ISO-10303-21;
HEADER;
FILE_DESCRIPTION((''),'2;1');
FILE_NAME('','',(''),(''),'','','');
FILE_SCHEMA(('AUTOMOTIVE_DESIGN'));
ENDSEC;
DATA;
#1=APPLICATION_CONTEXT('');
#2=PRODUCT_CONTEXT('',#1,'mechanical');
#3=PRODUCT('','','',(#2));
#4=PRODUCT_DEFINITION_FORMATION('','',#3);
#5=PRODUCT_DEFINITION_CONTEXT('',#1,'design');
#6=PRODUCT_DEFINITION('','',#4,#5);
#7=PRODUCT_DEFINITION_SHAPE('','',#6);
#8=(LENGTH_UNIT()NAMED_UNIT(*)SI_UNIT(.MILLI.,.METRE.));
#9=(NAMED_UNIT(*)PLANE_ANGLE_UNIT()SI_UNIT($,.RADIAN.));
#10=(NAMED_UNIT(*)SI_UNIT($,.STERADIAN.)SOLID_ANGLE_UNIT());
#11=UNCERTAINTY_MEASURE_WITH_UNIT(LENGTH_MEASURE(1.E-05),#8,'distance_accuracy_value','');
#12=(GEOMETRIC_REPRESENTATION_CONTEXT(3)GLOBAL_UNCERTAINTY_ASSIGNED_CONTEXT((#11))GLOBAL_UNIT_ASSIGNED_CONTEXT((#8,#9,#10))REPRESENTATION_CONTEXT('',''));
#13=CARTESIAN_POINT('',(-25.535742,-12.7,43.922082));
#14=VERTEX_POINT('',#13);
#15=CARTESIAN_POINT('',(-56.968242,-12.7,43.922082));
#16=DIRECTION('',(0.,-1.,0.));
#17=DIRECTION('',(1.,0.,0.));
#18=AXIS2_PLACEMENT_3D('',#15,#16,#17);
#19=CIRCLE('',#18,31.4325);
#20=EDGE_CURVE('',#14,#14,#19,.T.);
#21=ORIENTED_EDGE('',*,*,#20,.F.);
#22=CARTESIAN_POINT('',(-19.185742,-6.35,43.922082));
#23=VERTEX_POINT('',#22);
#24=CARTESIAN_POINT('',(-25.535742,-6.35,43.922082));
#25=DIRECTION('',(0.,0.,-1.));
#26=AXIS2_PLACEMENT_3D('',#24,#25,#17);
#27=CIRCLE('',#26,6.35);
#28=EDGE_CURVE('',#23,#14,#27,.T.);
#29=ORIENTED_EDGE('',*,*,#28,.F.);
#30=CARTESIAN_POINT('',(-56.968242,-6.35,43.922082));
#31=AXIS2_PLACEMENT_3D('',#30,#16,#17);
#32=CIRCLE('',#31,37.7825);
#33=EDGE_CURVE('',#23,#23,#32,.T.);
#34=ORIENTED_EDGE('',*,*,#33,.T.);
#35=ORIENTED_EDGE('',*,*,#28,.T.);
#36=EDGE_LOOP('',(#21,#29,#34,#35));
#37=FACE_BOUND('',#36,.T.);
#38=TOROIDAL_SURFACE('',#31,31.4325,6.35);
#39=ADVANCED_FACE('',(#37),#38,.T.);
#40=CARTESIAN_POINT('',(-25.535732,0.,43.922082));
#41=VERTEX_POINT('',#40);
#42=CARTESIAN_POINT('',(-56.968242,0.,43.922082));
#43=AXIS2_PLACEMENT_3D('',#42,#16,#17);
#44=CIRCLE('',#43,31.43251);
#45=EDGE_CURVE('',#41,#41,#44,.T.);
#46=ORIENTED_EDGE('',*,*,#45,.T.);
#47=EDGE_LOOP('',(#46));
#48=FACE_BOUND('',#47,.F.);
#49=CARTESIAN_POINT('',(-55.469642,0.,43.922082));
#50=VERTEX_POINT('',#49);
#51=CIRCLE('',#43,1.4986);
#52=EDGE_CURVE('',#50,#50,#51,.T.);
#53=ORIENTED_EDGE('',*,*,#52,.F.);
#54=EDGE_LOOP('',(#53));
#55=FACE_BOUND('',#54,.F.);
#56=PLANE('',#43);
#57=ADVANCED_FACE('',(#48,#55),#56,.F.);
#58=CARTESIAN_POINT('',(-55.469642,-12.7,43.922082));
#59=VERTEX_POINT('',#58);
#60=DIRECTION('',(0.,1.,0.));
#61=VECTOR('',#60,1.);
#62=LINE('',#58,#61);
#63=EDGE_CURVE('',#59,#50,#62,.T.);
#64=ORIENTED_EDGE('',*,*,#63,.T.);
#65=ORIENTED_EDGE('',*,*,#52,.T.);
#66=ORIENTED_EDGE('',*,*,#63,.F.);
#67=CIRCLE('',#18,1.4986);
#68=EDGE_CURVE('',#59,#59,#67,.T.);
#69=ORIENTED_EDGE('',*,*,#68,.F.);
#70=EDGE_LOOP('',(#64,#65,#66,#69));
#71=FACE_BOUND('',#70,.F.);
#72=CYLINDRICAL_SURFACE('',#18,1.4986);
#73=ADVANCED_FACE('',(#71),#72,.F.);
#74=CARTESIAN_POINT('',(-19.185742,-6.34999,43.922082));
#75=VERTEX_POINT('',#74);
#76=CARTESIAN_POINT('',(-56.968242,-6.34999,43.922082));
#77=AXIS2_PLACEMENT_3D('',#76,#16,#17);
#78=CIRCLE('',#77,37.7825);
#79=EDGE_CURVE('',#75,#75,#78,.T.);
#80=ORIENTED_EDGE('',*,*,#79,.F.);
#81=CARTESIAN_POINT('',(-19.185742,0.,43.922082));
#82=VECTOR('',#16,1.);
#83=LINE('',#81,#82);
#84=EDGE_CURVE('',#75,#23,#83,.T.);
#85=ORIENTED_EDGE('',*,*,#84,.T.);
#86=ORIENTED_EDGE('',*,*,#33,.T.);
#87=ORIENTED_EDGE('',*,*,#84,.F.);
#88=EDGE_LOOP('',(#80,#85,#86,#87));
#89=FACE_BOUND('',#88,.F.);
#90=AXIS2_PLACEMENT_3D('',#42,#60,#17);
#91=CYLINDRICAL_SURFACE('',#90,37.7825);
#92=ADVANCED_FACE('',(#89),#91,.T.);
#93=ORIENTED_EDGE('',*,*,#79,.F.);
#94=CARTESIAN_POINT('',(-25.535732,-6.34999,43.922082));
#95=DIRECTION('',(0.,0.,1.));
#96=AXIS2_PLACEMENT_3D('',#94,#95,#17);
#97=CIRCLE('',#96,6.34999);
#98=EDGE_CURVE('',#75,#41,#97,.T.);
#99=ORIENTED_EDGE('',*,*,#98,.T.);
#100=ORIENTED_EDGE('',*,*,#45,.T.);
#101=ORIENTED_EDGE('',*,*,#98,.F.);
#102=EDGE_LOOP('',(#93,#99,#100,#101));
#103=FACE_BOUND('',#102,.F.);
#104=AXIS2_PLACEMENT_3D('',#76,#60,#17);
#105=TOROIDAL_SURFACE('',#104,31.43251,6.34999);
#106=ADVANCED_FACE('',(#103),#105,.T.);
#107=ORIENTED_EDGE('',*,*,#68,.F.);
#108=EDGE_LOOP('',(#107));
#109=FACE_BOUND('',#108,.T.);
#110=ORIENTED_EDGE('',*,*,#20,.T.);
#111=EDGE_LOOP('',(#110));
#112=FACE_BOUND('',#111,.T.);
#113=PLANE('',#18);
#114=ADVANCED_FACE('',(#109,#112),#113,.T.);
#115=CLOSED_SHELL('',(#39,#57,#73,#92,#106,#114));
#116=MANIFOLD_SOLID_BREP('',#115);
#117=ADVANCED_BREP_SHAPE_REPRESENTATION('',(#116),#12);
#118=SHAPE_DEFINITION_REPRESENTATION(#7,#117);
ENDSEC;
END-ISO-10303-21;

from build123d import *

# Parameters (mm, degrees)
F0_R     = 37.7825
F1_DEPTH = 12.7
F2_R     = 6.35
F3_R     = 6.34999
F4_R     = 1.4986
F5_DEPTH = 12.701


# Not quite as in the source:
# - a fillet or chamfer is up to 0.001 mm smaller than in the source, because OpenCascade refuses the exact size


with BuildPart() as f1:
    # F0 (on Front) → F1 (new body)
    with BuildSketch(Plane.XZ):
        with Locations((-56.96824193, 43.9220815897)):
            Circle(F0_R)
    extrude(amount=F1_DEPTH)

    # F2
    f2_edges = [f1.edges().sort_by_distance(p)[0] for p in [
        (-94.750742, -12.7, 43.922082),
    ]]
    fillet(f2_edges, radius=F2_R)

    # F3 (radius 6.35 in the source; OpenCascade refuses exactly that, so slightly less here)
    f3_edges = [f1.edges().sort_by_distance(p)[0] for p in [
        (-94.750742, 0, 43.922082),
    ]]
    fillet(f3_edges, radius=F3_R)

    # F4 (on face) → F5 (cut, through all)
    with BuildSketch(Plane.XZ.offset(12.7)):
        with Locations((-56.96824193, 43.9220815897)):
            Circle(F4_R)
    extrude(amount=-F5_DEPTH, mode=Mode.SUBTRACT)


solid = f1.part
